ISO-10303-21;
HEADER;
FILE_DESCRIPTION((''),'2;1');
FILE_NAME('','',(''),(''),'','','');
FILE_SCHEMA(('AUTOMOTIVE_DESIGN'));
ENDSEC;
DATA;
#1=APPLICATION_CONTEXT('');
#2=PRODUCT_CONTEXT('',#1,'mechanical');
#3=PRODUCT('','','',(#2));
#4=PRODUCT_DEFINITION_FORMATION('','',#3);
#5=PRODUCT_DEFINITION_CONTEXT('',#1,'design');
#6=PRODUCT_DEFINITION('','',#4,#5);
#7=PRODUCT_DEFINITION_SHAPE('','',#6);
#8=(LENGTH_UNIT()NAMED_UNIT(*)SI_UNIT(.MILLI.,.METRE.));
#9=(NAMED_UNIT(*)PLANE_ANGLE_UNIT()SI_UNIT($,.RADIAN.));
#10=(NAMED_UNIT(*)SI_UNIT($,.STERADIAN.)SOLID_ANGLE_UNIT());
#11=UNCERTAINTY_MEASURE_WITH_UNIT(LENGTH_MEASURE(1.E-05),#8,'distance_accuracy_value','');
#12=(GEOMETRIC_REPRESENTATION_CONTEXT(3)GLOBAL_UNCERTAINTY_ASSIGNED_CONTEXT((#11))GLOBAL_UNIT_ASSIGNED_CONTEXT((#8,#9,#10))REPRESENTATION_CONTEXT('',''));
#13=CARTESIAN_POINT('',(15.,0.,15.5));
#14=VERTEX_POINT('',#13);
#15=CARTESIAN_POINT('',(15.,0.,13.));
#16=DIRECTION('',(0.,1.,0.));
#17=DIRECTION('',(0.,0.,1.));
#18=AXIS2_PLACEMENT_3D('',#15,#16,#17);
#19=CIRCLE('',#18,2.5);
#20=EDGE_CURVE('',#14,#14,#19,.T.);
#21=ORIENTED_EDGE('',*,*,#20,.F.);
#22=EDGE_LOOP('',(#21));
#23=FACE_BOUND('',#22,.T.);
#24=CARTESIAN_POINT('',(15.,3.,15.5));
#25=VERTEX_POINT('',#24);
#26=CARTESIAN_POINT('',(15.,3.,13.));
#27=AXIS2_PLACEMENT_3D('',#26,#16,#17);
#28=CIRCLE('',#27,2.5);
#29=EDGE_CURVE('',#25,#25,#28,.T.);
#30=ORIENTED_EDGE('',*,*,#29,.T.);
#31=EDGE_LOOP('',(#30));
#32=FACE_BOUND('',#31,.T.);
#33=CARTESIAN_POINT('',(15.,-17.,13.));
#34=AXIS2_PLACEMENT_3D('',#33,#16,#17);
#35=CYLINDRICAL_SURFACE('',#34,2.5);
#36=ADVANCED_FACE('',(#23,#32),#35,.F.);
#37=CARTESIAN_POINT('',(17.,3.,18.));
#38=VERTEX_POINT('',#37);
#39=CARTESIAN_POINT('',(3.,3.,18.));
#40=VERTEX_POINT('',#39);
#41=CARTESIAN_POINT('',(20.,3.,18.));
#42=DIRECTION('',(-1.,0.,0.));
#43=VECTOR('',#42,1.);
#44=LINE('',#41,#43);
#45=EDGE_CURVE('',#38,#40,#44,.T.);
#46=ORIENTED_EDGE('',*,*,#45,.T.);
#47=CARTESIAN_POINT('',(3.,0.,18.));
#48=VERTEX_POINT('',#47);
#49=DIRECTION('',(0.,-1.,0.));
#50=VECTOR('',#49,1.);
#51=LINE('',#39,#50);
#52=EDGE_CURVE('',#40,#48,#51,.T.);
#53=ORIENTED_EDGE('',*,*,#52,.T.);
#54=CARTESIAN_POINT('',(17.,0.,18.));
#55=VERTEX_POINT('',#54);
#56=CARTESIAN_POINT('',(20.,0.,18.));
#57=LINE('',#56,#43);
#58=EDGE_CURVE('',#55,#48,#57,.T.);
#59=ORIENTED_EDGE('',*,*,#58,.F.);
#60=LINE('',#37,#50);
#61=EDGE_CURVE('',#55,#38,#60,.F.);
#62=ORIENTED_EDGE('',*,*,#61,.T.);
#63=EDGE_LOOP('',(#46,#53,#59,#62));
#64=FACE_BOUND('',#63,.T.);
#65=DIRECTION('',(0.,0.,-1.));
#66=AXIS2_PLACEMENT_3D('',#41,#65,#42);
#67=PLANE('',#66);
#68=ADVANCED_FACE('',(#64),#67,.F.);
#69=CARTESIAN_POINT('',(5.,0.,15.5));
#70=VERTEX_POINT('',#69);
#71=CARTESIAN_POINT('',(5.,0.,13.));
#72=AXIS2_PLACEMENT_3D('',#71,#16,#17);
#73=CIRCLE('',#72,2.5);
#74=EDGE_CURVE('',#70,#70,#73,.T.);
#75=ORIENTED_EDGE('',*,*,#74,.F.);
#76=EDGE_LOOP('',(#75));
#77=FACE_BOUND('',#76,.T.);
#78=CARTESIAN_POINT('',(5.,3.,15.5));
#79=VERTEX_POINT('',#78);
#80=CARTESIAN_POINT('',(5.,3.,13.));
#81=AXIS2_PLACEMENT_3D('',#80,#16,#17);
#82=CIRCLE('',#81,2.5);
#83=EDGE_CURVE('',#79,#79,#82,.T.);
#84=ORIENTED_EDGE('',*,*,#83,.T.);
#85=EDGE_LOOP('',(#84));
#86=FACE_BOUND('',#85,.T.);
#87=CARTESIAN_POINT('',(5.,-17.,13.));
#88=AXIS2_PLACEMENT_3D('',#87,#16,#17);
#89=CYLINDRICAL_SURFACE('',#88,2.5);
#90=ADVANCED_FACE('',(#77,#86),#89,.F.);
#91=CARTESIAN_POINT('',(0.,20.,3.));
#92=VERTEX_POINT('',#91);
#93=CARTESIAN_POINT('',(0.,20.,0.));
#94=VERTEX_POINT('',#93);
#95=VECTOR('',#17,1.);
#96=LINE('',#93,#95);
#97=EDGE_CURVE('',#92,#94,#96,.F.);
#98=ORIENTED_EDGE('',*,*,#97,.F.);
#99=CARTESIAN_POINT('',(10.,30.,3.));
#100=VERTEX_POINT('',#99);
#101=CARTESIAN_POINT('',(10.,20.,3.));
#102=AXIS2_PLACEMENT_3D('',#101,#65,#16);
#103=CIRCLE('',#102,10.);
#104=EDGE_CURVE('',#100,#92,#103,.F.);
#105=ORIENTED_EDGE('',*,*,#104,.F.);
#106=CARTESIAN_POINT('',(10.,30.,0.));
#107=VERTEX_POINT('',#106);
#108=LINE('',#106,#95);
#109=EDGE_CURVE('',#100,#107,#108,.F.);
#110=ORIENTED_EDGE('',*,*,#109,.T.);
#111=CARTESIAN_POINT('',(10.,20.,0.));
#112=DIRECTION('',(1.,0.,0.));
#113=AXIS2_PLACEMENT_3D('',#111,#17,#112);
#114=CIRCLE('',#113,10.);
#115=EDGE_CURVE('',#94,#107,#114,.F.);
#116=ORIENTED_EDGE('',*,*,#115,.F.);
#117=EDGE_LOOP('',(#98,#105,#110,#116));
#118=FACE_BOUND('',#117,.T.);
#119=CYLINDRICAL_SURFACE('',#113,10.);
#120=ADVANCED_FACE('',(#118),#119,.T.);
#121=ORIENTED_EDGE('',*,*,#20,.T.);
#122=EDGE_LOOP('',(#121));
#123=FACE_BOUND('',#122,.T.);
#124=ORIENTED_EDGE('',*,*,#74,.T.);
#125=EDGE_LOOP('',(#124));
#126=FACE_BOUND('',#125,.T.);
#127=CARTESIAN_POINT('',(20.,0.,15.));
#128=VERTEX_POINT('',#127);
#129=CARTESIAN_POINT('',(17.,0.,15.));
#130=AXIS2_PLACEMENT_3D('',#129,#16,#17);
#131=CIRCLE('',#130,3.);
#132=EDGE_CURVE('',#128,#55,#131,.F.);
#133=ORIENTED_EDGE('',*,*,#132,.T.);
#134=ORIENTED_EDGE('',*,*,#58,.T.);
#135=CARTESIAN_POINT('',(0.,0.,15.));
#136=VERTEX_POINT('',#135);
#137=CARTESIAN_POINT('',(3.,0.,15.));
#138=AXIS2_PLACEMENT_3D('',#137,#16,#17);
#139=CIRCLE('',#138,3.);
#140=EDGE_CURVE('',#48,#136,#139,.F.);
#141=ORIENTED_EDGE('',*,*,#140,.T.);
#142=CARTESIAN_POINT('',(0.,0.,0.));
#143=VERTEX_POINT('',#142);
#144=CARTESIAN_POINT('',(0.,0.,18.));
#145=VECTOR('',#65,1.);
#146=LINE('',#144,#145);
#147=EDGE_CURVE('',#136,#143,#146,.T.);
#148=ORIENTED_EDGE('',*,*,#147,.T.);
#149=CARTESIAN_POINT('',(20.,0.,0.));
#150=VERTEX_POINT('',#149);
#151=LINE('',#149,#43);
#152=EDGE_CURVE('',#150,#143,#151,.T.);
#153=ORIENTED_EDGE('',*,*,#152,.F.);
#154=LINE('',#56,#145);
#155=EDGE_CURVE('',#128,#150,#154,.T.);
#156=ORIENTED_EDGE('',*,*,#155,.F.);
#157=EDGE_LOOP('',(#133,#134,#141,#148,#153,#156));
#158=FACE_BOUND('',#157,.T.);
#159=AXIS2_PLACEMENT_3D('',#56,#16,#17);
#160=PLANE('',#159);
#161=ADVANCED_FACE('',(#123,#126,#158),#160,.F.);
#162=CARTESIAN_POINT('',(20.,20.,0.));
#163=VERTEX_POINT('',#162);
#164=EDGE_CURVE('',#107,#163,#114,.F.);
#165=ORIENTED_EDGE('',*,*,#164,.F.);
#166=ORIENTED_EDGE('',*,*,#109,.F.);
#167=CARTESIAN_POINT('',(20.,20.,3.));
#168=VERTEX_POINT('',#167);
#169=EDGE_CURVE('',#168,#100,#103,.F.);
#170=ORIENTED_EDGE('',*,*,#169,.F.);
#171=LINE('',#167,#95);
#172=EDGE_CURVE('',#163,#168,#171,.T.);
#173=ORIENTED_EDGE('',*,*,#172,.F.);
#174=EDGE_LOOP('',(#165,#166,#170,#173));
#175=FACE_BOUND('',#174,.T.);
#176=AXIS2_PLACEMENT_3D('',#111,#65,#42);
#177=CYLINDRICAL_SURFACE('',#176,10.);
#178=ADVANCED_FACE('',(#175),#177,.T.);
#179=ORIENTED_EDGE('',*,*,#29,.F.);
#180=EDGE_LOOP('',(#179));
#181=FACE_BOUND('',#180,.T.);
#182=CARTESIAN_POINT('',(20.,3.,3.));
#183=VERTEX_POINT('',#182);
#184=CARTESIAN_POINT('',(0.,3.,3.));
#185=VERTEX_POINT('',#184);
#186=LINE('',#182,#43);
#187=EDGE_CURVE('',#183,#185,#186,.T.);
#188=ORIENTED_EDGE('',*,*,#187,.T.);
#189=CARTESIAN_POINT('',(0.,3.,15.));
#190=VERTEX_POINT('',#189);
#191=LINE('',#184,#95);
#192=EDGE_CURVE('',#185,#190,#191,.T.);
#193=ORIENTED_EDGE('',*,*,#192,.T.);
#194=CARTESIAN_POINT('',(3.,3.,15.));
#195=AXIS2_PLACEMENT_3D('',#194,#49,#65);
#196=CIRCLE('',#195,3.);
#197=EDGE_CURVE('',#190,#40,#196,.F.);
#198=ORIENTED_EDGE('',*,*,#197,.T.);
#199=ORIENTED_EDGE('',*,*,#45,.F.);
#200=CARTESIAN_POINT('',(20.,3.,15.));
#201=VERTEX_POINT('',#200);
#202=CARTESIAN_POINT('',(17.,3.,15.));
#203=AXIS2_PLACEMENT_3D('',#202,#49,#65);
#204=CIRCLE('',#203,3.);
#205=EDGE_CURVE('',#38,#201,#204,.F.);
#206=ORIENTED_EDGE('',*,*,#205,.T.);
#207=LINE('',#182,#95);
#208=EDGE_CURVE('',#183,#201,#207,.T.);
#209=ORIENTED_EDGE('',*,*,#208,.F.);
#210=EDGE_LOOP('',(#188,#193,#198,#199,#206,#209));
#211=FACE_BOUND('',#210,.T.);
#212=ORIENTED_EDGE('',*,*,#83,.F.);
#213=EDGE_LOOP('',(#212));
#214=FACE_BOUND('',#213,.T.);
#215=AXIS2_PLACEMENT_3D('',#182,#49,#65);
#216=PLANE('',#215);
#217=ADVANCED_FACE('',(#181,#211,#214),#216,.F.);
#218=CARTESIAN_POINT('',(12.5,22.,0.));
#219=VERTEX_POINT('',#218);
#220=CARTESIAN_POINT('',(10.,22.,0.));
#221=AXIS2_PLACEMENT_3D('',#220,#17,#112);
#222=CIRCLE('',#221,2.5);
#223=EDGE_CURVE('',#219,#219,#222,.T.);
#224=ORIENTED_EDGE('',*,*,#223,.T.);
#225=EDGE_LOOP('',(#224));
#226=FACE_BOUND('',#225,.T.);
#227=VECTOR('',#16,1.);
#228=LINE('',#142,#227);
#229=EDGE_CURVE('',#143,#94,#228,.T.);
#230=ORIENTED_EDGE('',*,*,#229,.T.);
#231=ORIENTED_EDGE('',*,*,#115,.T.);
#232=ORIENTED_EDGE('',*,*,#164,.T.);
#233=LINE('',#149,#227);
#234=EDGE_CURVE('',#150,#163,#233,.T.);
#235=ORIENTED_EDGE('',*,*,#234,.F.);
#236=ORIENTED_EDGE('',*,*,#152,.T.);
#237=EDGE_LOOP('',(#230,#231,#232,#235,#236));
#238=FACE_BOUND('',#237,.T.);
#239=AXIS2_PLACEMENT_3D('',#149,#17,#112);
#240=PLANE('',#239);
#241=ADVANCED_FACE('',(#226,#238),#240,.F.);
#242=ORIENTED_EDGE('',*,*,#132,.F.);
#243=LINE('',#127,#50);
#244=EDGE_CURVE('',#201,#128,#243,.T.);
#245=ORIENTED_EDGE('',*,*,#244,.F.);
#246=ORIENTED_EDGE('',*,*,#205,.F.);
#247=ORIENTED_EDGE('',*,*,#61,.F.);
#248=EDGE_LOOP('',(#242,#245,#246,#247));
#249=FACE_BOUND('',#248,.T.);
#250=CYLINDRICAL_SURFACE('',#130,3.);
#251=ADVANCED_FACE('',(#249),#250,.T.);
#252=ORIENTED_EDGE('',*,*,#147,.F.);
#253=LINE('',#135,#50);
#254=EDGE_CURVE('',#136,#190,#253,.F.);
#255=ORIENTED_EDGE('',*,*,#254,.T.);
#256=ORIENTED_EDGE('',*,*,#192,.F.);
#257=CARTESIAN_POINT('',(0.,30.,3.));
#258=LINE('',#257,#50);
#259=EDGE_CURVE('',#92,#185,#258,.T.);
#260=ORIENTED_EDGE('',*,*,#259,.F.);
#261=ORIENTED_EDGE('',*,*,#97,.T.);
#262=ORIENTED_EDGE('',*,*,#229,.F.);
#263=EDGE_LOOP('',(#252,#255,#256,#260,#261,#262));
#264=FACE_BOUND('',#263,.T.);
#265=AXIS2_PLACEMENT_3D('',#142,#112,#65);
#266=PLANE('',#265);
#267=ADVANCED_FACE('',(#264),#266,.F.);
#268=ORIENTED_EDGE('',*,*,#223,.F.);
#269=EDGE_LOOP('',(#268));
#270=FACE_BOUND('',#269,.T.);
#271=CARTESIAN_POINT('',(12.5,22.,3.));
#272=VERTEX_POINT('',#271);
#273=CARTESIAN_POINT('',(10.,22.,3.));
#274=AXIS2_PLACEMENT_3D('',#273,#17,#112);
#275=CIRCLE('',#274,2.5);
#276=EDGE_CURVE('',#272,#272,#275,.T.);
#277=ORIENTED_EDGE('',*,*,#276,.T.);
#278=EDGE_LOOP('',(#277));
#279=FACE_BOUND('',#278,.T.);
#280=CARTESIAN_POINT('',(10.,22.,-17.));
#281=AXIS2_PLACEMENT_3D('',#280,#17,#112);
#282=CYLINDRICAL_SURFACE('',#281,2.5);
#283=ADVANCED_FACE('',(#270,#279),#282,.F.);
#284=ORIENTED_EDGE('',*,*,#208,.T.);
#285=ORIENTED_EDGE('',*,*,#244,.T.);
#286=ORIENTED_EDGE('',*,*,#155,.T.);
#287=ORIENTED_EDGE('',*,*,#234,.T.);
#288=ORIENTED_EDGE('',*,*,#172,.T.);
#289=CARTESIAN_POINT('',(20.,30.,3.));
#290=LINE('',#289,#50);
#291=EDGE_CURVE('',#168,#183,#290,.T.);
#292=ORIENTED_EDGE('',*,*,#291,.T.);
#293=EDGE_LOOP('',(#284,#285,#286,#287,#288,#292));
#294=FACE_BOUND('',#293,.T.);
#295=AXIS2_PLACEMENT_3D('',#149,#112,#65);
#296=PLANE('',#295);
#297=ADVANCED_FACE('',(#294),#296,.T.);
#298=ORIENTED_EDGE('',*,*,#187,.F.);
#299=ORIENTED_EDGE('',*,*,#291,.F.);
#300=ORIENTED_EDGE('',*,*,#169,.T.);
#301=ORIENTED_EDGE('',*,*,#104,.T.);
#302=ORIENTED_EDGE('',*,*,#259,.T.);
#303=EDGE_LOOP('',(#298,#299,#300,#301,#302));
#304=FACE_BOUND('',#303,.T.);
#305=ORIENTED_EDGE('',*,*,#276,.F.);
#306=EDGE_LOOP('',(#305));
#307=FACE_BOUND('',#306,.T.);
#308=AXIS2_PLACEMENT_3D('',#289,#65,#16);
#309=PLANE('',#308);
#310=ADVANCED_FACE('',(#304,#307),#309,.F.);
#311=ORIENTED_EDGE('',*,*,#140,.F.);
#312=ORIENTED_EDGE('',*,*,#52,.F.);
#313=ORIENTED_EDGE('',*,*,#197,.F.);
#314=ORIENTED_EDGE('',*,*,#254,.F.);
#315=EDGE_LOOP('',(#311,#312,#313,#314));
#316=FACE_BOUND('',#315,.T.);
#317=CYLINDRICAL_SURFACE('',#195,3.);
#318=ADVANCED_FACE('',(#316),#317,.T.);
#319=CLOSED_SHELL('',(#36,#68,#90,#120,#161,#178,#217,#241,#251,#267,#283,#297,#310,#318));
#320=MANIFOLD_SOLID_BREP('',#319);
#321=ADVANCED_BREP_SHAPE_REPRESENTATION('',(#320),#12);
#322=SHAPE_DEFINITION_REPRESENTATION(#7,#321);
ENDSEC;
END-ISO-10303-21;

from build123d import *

# Parameters (mm, degrees)
BOSS_EXTRUDE3_DEPTH = 20
SKETCH4_R           = 2.5
CUT_EXTRUDE1_DEPTH  = 20
SKETCH5_R           = 2.5
CUT_EXTRUDE2_DEPTH  = 20
FILLET1_R           = 10
FILLET2_R           = 3


with BuildPart() as part:
    # Sketch3 → Boss-Extrude3 (new body)
    with BuildSketch(Plane(origin=(0, 0, 0), x_dir=(0, 0, -1), z_dir=(1, 0, 0))):
        Polygon((0, 0), (0, 30), (-3, 30), (-3, 3), (-18, 3), (-18, 0), align=None)
    extrude(amount=BOSS_EXTRUDE3_DEPTH)

    # Sketch4 → Cut-Extrude1 (cut)
    with BuildSketch(Plane.XY.offset(3)):
        with Locations((10, 22)):
            Circle(SKETCH4_R)
    extrude(amount=-CUT_EXTRUDE1_DEPTH, mode=Mode.SUBTRACT)

    # Sketch5 → Cut-Extrude2 (cut)
    with BuildSketch(Plane(origin=(0, 3, 0), x_dir=(1, 0, 0), z_dir=(0, 1, 0))):
        with Locations(Location((5, -13, 0), (0, 0, 270))):
            Circle(SKETCH5_R)
        with Locations(Location((15, -13, 0), (0, 0, 270))):
            Circle(SKETCH5_R)
    extrude(amount=-CUT_EXTRUDE2_DEPTH, mode=Mode.SUBTRACT)

    # Fillet1
    fillet1_edges = [part.edges().sort_by_distance(p)[0] for p in [
        (0, 30, 1.5),
        (20, 30, 1.5),
    ]]
    fillet(fillet1_edges, radius=FILLET1_R - 0.0001)  # a hair under: the kernel refuses the full size

    # Fillet2
    fillet2_edges = [part.edges().sort_by_distance(p)[0] for p in [
        (20, 1.5, 18),
        (0, 1.5, 18),
    ]]
    fillet(fillet2_edges, radius=FILLET2_R)


solid = part.part
